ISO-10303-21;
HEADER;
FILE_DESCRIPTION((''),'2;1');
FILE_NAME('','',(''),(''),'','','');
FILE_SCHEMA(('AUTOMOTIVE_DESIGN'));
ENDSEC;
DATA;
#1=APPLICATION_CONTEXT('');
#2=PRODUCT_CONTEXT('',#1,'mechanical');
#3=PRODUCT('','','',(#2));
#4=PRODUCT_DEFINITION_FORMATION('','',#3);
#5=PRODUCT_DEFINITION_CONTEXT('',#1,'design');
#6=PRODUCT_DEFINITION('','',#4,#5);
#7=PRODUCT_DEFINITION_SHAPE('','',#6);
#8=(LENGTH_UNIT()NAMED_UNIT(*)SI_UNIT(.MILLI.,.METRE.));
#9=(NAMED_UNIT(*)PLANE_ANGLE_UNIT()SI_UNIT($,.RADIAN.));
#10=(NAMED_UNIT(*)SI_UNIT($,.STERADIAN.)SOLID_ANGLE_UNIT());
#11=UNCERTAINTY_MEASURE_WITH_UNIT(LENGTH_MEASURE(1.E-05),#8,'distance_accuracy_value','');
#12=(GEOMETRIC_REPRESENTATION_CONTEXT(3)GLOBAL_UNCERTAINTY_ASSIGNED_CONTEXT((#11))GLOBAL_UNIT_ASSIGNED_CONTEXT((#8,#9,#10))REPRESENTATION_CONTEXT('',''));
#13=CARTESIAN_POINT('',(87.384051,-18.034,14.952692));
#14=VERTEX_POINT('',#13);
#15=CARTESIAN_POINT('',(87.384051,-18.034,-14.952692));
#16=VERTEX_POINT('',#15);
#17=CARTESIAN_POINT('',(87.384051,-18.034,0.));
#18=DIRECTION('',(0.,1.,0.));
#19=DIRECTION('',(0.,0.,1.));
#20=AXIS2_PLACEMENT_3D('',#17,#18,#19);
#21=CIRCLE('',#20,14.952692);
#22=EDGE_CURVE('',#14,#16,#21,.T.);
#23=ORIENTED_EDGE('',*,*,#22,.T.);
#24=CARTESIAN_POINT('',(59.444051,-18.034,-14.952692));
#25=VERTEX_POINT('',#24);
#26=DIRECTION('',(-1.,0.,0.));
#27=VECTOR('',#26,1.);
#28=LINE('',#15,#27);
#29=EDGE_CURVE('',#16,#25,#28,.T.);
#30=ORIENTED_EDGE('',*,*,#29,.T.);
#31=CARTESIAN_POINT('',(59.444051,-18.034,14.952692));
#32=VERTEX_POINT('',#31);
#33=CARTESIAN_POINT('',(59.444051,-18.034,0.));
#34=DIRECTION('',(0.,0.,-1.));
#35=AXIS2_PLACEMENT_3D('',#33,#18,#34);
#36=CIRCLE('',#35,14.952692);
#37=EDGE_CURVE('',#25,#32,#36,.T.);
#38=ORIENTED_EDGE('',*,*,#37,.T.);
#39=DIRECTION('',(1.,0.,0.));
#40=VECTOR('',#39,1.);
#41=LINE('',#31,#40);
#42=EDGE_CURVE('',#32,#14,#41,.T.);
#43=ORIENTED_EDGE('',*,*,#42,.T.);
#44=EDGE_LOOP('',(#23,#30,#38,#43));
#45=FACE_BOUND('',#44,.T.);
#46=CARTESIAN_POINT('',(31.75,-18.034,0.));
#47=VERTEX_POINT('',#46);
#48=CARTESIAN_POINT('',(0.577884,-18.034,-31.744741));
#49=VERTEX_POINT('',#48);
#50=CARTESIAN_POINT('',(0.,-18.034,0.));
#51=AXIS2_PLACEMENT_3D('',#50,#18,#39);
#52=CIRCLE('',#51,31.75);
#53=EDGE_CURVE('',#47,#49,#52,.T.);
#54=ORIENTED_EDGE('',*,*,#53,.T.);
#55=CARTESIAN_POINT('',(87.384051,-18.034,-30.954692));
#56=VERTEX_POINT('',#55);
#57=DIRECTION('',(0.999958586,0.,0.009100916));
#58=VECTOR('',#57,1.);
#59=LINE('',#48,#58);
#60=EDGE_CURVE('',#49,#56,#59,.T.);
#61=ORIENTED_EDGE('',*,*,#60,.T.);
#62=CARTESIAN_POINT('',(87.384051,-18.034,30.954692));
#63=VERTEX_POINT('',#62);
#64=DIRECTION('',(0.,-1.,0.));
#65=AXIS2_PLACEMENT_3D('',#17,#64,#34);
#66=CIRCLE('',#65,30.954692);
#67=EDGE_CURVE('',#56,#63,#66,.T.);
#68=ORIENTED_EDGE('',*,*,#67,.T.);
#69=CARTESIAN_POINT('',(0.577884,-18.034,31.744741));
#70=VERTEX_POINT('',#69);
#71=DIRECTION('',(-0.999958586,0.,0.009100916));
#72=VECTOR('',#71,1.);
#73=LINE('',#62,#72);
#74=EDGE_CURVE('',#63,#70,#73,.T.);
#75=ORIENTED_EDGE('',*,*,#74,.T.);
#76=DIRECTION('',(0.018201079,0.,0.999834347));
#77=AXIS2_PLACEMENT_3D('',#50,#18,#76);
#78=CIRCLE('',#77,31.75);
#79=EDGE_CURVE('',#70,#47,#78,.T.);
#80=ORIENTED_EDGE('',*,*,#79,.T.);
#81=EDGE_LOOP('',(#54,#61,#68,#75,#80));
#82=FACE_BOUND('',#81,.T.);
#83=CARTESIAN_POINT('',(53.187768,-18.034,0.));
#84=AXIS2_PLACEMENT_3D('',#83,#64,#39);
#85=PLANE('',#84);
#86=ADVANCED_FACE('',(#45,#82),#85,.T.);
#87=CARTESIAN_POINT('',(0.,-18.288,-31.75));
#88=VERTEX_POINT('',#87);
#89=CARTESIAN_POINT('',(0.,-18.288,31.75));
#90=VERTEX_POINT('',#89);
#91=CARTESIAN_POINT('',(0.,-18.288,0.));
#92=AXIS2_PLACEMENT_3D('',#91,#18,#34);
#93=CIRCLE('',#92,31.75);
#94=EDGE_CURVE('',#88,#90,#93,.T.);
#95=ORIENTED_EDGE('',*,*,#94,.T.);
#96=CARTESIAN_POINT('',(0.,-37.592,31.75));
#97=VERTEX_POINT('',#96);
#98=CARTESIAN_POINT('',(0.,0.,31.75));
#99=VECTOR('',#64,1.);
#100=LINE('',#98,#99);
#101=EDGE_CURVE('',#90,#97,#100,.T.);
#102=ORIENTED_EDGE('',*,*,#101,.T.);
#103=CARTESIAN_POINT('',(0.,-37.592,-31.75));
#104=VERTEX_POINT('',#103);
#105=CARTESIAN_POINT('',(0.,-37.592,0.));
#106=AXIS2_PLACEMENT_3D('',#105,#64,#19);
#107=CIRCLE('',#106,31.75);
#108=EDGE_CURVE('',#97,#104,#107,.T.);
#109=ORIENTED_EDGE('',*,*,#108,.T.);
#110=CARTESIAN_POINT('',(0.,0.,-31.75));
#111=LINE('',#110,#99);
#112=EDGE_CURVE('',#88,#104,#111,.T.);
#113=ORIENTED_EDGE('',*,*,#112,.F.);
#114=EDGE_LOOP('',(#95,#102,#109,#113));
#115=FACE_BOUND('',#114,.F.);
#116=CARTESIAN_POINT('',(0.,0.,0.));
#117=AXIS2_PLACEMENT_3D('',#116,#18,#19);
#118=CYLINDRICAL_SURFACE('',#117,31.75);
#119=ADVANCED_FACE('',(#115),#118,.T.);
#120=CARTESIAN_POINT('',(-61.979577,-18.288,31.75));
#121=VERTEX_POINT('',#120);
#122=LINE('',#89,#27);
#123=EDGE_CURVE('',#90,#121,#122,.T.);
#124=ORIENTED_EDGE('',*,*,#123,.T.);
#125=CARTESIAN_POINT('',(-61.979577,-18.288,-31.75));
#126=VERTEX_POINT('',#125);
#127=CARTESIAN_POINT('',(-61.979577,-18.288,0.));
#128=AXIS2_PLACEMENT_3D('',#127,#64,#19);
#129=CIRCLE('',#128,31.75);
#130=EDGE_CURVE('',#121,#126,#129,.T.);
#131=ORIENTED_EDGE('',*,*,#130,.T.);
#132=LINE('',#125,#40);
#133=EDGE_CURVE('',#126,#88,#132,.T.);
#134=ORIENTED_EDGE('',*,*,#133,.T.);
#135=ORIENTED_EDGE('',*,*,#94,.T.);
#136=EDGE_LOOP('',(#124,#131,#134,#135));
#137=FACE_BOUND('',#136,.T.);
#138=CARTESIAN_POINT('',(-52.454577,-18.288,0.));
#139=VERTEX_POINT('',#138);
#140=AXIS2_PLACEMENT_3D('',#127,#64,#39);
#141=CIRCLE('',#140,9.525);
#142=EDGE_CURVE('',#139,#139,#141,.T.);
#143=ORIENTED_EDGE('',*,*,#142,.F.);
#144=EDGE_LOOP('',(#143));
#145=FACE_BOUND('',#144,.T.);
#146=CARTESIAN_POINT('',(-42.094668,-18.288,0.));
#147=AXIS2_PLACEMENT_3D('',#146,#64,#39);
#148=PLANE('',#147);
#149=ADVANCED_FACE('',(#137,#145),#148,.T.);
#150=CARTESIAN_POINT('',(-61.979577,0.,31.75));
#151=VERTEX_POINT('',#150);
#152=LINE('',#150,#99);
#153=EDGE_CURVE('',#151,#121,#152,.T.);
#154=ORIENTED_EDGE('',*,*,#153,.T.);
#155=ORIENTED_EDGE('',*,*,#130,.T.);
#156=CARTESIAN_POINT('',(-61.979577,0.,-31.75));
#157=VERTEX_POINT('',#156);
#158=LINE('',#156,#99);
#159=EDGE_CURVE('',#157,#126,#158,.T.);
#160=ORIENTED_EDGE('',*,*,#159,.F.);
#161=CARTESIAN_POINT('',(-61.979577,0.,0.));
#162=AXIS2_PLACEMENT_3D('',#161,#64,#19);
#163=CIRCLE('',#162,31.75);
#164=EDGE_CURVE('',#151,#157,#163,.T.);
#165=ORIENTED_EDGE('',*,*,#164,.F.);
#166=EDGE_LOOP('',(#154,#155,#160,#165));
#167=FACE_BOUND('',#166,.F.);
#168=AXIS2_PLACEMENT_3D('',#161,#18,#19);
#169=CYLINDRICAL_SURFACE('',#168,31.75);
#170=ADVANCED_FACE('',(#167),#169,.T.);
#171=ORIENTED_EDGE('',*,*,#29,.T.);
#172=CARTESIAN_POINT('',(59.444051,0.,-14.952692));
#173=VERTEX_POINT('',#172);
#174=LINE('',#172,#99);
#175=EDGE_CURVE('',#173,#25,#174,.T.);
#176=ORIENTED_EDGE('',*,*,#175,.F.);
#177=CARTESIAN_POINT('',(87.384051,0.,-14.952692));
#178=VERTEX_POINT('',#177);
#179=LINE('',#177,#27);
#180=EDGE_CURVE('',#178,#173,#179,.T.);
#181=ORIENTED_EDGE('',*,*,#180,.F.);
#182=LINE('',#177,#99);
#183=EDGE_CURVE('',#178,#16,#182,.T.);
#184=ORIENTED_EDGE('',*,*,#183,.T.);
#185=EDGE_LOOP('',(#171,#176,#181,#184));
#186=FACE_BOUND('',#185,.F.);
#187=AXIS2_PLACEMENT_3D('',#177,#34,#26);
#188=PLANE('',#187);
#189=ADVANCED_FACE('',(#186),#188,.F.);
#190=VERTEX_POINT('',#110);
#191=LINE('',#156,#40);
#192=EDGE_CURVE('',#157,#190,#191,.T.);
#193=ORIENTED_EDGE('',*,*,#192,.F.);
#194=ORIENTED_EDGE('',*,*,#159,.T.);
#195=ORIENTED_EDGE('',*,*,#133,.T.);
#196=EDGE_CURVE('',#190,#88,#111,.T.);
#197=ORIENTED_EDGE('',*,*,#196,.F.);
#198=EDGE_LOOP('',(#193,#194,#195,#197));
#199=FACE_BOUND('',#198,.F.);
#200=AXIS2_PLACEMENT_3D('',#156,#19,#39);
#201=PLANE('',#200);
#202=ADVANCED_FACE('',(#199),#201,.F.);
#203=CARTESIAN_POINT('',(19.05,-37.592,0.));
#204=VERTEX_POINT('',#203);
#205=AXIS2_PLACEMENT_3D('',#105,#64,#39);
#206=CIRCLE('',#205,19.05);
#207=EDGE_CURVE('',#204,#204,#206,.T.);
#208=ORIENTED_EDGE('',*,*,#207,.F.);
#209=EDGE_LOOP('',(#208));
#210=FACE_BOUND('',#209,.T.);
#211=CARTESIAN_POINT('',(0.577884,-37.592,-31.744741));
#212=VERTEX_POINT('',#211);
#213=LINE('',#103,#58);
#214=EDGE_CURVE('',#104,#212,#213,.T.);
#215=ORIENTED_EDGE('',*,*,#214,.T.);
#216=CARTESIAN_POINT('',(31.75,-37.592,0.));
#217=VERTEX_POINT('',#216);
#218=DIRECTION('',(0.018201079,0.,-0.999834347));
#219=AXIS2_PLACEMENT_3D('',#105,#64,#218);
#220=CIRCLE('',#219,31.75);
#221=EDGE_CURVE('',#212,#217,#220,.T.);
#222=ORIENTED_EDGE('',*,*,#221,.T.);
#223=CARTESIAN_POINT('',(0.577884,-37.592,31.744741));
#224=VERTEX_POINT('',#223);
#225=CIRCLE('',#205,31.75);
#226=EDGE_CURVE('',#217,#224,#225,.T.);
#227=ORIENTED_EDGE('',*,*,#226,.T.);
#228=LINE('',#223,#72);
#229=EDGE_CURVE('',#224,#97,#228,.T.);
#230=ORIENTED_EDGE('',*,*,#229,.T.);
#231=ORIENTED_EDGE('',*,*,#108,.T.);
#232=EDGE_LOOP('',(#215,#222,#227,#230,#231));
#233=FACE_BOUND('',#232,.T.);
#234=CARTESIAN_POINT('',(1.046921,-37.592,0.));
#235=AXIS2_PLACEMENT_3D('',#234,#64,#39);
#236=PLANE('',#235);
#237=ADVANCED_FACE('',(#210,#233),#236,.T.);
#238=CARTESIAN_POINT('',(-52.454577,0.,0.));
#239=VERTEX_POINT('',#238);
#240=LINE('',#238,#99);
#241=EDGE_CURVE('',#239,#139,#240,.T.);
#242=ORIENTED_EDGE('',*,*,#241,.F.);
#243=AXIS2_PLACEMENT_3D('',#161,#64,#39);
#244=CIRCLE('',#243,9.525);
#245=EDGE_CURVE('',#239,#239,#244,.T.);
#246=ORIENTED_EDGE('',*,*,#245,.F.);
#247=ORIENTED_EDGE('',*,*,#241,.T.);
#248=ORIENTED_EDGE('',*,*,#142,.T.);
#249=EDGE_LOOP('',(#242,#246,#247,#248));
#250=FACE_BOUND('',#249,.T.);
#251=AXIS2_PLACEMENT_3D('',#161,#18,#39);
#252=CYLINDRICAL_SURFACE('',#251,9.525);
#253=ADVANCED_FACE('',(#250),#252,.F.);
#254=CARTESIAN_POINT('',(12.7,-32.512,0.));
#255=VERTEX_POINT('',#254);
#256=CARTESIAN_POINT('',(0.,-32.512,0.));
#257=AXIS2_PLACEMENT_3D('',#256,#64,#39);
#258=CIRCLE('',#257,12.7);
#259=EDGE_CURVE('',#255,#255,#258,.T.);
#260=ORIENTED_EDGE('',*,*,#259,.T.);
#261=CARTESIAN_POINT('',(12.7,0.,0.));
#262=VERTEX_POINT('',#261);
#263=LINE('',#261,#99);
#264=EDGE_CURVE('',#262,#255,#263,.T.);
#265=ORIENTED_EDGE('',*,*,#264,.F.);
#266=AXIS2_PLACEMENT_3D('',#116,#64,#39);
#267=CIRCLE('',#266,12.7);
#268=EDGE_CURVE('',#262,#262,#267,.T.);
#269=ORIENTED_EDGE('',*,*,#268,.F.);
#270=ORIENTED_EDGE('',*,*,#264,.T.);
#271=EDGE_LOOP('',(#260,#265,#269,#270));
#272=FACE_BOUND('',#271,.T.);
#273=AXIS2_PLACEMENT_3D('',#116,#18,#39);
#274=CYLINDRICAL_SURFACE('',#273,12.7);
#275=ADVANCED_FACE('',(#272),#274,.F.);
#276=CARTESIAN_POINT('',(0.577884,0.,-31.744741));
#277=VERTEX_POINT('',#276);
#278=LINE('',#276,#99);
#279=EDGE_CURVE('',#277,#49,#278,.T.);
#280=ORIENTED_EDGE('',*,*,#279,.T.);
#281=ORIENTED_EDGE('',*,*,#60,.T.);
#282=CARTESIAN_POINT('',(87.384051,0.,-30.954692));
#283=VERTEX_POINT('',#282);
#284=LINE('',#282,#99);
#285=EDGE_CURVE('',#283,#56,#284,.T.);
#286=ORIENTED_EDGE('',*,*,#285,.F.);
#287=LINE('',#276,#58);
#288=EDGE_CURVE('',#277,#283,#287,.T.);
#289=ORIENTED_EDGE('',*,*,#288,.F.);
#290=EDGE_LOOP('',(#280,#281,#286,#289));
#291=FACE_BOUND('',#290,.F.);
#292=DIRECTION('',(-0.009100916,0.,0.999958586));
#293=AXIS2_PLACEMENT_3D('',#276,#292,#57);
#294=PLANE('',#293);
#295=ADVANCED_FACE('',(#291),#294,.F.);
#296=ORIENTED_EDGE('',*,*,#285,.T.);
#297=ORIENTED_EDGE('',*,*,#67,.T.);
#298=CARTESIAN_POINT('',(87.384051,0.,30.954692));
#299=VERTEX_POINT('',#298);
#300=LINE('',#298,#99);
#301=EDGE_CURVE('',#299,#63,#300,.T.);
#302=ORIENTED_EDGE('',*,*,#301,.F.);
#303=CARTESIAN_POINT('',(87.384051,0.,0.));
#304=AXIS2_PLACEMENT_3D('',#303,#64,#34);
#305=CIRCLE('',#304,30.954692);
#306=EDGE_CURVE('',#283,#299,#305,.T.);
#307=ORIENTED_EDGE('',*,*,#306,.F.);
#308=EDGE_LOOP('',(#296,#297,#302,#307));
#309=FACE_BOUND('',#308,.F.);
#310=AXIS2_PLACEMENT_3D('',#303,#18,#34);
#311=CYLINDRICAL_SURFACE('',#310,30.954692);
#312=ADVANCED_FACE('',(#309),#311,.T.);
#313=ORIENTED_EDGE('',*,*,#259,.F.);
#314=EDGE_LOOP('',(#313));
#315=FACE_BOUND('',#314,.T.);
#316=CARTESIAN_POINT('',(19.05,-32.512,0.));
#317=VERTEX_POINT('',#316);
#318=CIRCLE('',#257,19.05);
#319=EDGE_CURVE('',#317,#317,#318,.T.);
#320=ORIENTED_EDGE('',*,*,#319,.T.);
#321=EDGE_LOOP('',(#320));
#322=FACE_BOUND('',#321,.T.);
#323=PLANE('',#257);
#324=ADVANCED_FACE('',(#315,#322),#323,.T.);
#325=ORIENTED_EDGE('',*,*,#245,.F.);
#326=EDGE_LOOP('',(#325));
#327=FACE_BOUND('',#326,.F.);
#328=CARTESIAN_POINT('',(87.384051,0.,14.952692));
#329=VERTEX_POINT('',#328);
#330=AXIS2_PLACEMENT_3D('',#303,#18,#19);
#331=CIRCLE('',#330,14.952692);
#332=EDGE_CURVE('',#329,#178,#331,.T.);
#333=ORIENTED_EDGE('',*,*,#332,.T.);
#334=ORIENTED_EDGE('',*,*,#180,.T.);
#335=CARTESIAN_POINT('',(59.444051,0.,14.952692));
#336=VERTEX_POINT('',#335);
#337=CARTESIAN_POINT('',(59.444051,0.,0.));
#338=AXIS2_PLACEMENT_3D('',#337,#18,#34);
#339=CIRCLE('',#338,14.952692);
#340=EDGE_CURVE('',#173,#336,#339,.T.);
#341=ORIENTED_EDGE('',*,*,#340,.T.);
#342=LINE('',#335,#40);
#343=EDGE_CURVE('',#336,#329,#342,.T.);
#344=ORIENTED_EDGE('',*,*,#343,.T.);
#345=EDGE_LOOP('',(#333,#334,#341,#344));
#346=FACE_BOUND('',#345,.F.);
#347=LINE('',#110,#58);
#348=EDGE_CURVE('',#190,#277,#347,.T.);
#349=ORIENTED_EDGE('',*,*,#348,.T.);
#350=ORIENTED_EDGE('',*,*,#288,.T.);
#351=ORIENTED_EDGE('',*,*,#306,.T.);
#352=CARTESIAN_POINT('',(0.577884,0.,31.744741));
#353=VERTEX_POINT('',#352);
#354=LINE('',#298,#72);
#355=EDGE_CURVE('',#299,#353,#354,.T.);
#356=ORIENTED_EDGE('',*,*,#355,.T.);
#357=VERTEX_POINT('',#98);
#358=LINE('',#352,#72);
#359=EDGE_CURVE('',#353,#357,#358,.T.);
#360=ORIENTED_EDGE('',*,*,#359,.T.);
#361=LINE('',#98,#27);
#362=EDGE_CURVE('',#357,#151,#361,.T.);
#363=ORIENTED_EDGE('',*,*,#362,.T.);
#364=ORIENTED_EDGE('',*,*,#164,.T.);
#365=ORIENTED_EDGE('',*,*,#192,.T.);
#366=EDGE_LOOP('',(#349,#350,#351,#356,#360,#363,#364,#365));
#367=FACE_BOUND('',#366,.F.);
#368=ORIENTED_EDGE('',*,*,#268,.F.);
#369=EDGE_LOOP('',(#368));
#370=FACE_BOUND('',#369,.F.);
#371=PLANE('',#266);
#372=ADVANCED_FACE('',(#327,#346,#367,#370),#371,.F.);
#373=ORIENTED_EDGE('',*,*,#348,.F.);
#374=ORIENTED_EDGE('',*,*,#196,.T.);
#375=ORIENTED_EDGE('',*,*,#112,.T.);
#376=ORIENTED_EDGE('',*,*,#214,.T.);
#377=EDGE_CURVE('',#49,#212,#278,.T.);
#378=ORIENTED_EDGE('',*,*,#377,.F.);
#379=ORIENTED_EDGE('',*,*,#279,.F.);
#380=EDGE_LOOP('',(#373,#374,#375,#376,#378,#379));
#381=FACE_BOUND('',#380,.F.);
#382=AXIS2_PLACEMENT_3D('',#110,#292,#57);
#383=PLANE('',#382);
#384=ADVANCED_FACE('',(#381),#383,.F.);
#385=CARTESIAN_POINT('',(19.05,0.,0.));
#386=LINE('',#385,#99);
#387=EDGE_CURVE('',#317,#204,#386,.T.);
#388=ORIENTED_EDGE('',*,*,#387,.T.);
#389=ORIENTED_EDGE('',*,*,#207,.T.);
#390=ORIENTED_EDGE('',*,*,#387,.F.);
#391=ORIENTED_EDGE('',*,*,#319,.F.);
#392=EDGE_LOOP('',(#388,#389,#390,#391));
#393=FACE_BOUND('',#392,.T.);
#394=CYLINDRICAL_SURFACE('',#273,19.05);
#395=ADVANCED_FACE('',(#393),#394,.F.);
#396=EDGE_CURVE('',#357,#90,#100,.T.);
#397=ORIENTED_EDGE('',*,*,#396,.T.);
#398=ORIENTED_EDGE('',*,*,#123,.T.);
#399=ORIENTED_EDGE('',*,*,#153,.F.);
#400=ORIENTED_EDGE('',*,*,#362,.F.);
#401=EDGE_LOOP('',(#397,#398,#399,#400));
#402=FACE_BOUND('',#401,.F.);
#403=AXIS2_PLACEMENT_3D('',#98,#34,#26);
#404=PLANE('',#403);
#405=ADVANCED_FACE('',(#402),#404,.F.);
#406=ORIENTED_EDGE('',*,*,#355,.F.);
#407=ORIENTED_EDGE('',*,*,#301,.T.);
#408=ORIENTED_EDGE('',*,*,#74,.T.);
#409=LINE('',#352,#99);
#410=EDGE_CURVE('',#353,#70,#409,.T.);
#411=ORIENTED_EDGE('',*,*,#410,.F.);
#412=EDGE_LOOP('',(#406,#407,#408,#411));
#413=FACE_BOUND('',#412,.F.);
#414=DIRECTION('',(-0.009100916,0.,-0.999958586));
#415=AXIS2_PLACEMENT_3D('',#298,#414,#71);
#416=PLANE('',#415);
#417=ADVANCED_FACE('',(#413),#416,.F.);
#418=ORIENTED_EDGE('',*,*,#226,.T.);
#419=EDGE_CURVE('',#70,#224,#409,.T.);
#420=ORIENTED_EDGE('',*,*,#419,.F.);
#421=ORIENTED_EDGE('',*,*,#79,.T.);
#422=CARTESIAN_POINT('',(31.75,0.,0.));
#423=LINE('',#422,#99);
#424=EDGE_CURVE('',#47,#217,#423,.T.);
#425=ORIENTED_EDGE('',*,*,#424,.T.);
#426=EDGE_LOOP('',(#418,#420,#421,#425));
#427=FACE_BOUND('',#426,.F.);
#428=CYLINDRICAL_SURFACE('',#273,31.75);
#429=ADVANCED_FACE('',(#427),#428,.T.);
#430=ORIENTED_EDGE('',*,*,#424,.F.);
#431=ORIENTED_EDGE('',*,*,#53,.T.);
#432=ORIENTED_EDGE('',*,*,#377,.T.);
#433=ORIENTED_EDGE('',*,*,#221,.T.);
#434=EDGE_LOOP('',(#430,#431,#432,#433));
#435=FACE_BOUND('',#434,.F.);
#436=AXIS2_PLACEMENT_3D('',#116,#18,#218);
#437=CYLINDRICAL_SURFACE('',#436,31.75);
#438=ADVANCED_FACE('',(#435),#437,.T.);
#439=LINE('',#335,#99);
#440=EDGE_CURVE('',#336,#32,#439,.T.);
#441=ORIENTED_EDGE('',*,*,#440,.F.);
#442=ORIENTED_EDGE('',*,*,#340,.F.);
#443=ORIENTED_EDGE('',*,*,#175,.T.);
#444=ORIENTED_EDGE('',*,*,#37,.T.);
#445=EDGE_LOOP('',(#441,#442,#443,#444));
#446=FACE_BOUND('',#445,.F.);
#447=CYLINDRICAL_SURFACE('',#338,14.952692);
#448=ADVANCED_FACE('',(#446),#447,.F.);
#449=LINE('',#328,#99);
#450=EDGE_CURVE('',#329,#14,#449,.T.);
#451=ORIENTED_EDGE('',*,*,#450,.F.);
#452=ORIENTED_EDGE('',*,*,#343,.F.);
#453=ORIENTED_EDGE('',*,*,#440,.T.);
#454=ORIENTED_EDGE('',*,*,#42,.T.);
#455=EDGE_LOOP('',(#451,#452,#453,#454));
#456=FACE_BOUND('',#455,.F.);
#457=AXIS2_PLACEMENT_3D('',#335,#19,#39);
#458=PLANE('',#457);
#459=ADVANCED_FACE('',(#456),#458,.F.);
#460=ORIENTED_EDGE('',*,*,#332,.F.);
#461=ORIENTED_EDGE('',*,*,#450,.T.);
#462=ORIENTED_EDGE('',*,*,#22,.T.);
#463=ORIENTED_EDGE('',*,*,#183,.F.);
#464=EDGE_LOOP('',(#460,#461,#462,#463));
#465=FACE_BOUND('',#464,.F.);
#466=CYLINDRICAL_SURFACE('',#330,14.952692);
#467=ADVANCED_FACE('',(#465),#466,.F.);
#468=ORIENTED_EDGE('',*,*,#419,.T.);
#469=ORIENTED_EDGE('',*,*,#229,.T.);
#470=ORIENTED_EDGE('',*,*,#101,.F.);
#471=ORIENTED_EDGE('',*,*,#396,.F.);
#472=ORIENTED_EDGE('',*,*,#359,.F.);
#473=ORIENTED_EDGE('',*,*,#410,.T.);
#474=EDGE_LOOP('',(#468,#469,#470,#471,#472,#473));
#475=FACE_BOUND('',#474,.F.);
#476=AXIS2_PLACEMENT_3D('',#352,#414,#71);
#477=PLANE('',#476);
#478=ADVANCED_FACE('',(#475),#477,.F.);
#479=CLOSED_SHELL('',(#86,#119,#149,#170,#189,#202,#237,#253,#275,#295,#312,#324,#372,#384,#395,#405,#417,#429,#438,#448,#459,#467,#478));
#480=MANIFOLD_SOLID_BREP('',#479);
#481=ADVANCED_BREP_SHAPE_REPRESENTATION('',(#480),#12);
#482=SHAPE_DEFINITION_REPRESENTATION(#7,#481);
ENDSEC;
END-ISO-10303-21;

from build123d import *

# Parameters (mm, degrees)
F0_R     = 9.525
F1_DEPTH = 18.288
F0_R_2   = 19.05
F2_DEPTH = 37.592
F3_DEPTH = 18.034
F0_R_3   = 12.7
F5_DEPTH = 32.512


# Not quite as in the source:
# - the program builds the solid bodies; features that only make, move or delete a surface that nothing else refers to are left out


with BuildPart() as f1:
    # F0 (on Front) → F1 (new body)
    with BuildSketch(Plane.XZ):
        with BuildLine():
            ThreePointArc((0, -31.75), (-31.75, 0), (0, 31.75))
            Line((0, 31.75), (-61.9795769453, 31.75))
            ThreePointArc((-61.9795769453, 31.75), (-93.7295769453, 0), (-61.9795769453, -31.75))
            Line((-61.9795769453, -31.75), (0, -31.75))
        make_face()
        with Locations((-61.9795769453, 0)):
            Circle(F0_R, mode=Mode.SUBTRACT)
    extrude(amount=F1_DEPTH)

    # F0 (on Front) → F2 (join)
    with BuildSketch(Plane.XZ):
        with BuildLine():
            Line((0.5778842542, 31.7447405059), (0, 31.75))
            ThreePointArc((0, 31.75), (-31.75, 0), (0, -31.75))
            Line((0, -31.75), (0.5778842542, -31.7447405059))
            ThreePointArc((0.5778842542, -31.7447405059), (22.6540319267, -22.2453891282), (31.75, 0))
            ThreePointArc((31.75, 0), (22.6540319267, 22.2453891282), (0.5778842542, 31.7447405059))
        make_face()
        Circle(F0_R_2, mode=Mode.SUBTRACT)
    extrude(amount=F2_DEPTH)

    # F0 (on Front) → F3 (join)
    with BuildSketch(Plane.XZ):
        with BuildLine():
            Line((87.3840512359, 30.9546921229), (0.5778842542, 31.7447405059))
            ThreePointArc((0.5778842542, 31.7447405059), (22.6540319267, 22.2453891282), (31.75, 0))
            ThreePointArc((31.75, 0), (22.6540319267, -22.2453891282), (0.5778842542, -31.7447405059))
            Line((0.5778842542, -31.7447405059), (87.3840512359, -30.9546921229))
            ThreePointArc((87.3840512359, -30.9546921229), (118.3387433588, 0), (87.3840512359, 30.9546921229))
        make_face()
        with BuildLine():
            ThreePointArc((59.4440512359, -14.9526921229), (44.491359113, 0), (59.4440512359, 14.9526921229))
            Line((59.4440512359, 14.9526921229), (87.3840512359, 14.9526921229))
            ThreePointArc((87.3840512359, 14.9526921229), (102.3367433588, 0), (87.3840512359, -14.9526921229))
            Line((87.3840512359, -14.9526921229), (59.4440512359, -14.9526921229))
        make_face(mode=Mode.SUBTRACT)
    extrude(amount=F3_DEPTH)

    # F0 (on Front) → F5 (join)
    with BuildSketch(Plane.XZ):
        Circle(F0_R_2)
        Circle(F0_R_3, mode=Mode.SUBTRACT)
    extrude(amount=F5_DEPTH)


solid = f1.part
